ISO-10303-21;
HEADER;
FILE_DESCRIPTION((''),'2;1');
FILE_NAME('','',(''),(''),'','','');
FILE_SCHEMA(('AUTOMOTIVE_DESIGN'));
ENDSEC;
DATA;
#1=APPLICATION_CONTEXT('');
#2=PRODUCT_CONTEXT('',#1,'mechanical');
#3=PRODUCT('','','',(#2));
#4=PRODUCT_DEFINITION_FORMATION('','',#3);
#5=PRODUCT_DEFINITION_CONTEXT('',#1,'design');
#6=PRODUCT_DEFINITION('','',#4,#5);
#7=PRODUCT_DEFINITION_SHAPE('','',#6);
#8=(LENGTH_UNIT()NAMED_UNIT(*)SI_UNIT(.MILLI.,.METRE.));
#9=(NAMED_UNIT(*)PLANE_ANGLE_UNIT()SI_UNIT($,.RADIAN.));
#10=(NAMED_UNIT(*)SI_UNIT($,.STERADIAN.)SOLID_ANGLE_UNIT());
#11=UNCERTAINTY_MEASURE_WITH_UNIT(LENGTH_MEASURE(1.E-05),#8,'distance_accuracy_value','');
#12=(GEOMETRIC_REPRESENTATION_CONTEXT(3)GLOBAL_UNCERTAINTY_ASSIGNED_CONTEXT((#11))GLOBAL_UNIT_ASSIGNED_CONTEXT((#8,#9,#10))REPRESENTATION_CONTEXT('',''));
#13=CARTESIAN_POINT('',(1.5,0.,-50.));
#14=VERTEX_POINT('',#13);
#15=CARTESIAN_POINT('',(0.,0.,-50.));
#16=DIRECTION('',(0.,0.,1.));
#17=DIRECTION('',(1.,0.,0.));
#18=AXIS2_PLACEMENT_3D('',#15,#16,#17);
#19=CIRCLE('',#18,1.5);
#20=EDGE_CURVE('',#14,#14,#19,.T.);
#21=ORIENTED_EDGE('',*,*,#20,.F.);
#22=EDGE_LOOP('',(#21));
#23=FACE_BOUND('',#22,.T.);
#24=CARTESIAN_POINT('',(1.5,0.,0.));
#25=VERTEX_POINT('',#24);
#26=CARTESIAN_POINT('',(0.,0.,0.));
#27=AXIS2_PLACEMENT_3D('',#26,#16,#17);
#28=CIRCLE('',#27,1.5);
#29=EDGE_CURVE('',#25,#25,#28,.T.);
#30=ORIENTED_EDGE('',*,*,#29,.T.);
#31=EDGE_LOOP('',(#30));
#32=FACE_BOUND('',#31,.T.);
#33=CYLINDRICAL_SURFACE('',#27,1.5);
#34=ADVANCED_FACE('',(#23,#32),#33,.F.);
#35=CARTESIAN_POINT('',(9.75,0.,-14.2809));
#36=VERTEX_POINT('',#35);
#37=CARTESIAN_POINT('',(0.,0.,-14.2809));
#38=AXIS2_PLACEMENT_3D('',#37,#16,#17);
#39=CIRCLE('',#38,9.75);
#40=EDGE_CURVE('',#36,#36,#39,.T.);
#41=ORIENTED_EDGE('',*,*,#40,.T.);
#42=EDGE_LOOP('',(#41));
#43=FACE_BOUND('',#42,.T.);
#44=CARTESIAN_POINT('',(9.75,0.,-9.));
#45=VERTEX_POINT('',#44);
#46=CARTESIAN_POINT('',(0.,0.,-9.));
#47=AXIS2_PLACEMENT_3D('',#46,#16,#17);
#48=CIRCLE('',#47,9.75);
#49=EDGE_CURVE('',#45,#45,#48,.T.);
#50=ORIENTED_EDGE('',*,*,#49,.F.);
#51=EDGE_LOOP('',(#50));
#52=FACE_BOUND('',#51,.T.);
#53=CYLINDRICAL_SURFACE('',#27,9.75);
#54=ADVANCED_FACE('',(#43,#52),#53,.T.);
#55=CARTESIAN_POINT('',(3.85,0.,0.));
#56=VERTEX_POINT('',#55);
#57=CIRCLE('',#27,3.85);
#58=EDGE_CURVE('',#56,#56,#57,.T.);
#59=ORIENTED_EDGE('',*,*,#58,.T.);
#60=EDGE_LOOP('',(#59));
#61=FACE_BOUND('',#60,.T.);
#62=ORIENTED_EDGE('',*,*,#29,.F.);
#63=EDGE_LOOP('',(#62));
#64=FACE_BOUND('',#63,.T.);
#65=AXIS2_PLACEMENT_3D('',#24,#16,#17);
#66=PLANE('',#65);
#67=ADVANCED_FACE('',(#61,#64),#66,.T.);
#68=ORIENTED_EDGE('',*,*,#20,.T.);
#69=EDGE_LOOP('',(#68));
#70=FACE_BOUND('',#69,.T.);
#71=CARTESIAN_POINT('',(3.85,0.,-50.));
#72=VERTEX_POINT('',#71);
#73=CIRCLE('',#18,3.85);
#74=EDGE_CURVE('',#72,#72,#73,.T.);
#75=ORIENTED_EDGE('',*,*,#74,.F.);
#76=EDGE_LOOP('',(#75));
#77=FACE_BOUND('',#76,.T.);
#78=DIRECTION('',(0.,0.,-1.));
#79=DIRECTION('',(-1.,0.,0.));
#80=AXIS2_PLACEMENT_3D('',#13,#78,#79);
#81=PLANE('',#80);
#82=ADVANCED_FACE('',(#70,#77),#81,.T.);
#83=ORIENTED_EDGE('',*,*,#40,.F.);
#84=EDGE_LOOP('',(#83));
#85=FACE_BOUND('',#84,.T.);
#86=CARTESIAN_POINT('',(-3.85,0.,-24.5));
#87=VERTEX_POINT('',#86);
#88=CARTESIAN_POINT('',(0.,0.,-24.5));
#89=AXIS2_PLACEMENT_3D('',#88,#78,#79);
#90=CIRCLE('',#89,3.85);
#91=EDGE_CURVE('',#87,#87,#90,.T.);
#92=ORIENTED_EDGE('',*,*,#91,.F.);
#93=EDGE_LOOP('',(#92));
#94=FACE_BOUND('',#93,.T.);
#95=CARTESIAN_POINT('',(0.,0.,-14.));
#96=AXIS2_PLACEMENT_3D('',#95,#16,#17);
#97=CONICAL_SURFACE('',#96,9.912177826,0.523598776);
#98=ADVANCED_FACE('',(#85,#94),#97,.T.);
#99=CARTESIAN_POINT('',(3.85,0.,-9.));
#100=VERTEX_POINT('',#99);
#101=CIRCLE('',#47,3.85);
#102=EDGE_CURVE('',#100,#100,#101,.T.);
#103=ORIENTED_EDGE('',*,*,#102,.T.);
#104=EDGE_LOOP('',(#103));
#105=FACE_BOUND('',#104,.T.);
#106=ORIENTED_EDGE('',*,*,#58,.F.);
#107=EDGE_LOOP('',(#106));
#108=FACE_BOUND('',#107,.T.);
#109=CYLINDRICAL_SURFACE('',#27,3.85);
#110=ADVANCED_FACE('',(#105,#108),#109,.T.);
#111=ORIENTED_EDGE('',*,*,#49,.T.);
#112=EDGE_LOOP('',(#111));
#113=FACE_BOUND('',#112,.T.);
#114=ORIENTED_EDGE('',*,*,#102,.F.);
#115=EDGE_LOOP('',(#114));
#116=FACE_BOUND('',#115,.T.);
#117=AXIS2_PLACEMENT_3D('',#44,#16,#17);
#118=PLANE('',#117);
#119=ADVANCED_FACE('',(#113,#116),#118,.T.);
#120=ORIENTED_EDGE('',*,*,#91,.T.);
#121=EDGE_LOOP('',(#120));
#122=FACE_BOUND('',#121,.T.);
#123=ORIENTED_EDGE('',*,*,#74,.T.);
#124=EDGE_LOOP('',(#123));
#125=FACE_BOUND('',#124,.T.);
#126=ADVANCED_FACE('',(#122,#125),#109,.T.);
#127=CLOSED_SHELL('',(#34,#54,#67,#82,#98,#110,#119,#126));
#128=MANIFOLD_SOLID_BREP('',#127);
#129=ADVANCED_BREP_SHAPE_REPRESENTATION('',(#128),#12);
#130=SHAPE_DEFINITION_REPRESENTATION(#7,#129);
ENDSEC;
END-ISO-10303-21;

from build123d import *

# Parameters (mm, degrees)
CHAMFER1_SIZE   = 6.062177826
CHAMFER1_SIZE_2 = 10.5


with BuildPart() as part:
    # Sketch2 → Revolve1 (revolve)
    with BuildSketch(Plane(origin=(0, 0, 0), x_dir=(1, 0, 0), z_dir=(0, 1, 0))):
        Polygon((1.5, 0), (3.85, 0), (3.85, 9), (9.75, 9), (9.75, 14), (3.85, 14), (3.85, 50), (1.5, 50), align=None)
    revolve(axis=Axis((0, 0, 0), (0, 0, -1)))

    # Chamfer1
    # the kernel refuses this chamfer: 10.5, 6.062177826 mm, written as the material it adds along each edge
    with BuildSketch(Plane(origin=(0, 0, -14), x_dir=(1, 0, 0), z_dir=(0, 1, 0))) as chamfer1_piece_1_section:
        Polygon((3.85 + CHAMFER1_SIZE, 0), (3.85, CHAMFER1_SIZE_2), (3.85, 0), align=None)
    chamfer1_piece_1 = revolve(axis=Axis((0, 0, -14), (0, 0, -1)), mode=Mode.PRIVATE)
    chamfer1_piece_1 = chamfer1_piece_1 & Plane(origin=(0, 0, -19.51769374), x_dir=(1, 0, 0), z_dir=(0, 0, -1)) * Cylinder(9.75, 42, mode=Mode.PRIVATE)
    add(chamfer1_piece_1)


solid = part.part
